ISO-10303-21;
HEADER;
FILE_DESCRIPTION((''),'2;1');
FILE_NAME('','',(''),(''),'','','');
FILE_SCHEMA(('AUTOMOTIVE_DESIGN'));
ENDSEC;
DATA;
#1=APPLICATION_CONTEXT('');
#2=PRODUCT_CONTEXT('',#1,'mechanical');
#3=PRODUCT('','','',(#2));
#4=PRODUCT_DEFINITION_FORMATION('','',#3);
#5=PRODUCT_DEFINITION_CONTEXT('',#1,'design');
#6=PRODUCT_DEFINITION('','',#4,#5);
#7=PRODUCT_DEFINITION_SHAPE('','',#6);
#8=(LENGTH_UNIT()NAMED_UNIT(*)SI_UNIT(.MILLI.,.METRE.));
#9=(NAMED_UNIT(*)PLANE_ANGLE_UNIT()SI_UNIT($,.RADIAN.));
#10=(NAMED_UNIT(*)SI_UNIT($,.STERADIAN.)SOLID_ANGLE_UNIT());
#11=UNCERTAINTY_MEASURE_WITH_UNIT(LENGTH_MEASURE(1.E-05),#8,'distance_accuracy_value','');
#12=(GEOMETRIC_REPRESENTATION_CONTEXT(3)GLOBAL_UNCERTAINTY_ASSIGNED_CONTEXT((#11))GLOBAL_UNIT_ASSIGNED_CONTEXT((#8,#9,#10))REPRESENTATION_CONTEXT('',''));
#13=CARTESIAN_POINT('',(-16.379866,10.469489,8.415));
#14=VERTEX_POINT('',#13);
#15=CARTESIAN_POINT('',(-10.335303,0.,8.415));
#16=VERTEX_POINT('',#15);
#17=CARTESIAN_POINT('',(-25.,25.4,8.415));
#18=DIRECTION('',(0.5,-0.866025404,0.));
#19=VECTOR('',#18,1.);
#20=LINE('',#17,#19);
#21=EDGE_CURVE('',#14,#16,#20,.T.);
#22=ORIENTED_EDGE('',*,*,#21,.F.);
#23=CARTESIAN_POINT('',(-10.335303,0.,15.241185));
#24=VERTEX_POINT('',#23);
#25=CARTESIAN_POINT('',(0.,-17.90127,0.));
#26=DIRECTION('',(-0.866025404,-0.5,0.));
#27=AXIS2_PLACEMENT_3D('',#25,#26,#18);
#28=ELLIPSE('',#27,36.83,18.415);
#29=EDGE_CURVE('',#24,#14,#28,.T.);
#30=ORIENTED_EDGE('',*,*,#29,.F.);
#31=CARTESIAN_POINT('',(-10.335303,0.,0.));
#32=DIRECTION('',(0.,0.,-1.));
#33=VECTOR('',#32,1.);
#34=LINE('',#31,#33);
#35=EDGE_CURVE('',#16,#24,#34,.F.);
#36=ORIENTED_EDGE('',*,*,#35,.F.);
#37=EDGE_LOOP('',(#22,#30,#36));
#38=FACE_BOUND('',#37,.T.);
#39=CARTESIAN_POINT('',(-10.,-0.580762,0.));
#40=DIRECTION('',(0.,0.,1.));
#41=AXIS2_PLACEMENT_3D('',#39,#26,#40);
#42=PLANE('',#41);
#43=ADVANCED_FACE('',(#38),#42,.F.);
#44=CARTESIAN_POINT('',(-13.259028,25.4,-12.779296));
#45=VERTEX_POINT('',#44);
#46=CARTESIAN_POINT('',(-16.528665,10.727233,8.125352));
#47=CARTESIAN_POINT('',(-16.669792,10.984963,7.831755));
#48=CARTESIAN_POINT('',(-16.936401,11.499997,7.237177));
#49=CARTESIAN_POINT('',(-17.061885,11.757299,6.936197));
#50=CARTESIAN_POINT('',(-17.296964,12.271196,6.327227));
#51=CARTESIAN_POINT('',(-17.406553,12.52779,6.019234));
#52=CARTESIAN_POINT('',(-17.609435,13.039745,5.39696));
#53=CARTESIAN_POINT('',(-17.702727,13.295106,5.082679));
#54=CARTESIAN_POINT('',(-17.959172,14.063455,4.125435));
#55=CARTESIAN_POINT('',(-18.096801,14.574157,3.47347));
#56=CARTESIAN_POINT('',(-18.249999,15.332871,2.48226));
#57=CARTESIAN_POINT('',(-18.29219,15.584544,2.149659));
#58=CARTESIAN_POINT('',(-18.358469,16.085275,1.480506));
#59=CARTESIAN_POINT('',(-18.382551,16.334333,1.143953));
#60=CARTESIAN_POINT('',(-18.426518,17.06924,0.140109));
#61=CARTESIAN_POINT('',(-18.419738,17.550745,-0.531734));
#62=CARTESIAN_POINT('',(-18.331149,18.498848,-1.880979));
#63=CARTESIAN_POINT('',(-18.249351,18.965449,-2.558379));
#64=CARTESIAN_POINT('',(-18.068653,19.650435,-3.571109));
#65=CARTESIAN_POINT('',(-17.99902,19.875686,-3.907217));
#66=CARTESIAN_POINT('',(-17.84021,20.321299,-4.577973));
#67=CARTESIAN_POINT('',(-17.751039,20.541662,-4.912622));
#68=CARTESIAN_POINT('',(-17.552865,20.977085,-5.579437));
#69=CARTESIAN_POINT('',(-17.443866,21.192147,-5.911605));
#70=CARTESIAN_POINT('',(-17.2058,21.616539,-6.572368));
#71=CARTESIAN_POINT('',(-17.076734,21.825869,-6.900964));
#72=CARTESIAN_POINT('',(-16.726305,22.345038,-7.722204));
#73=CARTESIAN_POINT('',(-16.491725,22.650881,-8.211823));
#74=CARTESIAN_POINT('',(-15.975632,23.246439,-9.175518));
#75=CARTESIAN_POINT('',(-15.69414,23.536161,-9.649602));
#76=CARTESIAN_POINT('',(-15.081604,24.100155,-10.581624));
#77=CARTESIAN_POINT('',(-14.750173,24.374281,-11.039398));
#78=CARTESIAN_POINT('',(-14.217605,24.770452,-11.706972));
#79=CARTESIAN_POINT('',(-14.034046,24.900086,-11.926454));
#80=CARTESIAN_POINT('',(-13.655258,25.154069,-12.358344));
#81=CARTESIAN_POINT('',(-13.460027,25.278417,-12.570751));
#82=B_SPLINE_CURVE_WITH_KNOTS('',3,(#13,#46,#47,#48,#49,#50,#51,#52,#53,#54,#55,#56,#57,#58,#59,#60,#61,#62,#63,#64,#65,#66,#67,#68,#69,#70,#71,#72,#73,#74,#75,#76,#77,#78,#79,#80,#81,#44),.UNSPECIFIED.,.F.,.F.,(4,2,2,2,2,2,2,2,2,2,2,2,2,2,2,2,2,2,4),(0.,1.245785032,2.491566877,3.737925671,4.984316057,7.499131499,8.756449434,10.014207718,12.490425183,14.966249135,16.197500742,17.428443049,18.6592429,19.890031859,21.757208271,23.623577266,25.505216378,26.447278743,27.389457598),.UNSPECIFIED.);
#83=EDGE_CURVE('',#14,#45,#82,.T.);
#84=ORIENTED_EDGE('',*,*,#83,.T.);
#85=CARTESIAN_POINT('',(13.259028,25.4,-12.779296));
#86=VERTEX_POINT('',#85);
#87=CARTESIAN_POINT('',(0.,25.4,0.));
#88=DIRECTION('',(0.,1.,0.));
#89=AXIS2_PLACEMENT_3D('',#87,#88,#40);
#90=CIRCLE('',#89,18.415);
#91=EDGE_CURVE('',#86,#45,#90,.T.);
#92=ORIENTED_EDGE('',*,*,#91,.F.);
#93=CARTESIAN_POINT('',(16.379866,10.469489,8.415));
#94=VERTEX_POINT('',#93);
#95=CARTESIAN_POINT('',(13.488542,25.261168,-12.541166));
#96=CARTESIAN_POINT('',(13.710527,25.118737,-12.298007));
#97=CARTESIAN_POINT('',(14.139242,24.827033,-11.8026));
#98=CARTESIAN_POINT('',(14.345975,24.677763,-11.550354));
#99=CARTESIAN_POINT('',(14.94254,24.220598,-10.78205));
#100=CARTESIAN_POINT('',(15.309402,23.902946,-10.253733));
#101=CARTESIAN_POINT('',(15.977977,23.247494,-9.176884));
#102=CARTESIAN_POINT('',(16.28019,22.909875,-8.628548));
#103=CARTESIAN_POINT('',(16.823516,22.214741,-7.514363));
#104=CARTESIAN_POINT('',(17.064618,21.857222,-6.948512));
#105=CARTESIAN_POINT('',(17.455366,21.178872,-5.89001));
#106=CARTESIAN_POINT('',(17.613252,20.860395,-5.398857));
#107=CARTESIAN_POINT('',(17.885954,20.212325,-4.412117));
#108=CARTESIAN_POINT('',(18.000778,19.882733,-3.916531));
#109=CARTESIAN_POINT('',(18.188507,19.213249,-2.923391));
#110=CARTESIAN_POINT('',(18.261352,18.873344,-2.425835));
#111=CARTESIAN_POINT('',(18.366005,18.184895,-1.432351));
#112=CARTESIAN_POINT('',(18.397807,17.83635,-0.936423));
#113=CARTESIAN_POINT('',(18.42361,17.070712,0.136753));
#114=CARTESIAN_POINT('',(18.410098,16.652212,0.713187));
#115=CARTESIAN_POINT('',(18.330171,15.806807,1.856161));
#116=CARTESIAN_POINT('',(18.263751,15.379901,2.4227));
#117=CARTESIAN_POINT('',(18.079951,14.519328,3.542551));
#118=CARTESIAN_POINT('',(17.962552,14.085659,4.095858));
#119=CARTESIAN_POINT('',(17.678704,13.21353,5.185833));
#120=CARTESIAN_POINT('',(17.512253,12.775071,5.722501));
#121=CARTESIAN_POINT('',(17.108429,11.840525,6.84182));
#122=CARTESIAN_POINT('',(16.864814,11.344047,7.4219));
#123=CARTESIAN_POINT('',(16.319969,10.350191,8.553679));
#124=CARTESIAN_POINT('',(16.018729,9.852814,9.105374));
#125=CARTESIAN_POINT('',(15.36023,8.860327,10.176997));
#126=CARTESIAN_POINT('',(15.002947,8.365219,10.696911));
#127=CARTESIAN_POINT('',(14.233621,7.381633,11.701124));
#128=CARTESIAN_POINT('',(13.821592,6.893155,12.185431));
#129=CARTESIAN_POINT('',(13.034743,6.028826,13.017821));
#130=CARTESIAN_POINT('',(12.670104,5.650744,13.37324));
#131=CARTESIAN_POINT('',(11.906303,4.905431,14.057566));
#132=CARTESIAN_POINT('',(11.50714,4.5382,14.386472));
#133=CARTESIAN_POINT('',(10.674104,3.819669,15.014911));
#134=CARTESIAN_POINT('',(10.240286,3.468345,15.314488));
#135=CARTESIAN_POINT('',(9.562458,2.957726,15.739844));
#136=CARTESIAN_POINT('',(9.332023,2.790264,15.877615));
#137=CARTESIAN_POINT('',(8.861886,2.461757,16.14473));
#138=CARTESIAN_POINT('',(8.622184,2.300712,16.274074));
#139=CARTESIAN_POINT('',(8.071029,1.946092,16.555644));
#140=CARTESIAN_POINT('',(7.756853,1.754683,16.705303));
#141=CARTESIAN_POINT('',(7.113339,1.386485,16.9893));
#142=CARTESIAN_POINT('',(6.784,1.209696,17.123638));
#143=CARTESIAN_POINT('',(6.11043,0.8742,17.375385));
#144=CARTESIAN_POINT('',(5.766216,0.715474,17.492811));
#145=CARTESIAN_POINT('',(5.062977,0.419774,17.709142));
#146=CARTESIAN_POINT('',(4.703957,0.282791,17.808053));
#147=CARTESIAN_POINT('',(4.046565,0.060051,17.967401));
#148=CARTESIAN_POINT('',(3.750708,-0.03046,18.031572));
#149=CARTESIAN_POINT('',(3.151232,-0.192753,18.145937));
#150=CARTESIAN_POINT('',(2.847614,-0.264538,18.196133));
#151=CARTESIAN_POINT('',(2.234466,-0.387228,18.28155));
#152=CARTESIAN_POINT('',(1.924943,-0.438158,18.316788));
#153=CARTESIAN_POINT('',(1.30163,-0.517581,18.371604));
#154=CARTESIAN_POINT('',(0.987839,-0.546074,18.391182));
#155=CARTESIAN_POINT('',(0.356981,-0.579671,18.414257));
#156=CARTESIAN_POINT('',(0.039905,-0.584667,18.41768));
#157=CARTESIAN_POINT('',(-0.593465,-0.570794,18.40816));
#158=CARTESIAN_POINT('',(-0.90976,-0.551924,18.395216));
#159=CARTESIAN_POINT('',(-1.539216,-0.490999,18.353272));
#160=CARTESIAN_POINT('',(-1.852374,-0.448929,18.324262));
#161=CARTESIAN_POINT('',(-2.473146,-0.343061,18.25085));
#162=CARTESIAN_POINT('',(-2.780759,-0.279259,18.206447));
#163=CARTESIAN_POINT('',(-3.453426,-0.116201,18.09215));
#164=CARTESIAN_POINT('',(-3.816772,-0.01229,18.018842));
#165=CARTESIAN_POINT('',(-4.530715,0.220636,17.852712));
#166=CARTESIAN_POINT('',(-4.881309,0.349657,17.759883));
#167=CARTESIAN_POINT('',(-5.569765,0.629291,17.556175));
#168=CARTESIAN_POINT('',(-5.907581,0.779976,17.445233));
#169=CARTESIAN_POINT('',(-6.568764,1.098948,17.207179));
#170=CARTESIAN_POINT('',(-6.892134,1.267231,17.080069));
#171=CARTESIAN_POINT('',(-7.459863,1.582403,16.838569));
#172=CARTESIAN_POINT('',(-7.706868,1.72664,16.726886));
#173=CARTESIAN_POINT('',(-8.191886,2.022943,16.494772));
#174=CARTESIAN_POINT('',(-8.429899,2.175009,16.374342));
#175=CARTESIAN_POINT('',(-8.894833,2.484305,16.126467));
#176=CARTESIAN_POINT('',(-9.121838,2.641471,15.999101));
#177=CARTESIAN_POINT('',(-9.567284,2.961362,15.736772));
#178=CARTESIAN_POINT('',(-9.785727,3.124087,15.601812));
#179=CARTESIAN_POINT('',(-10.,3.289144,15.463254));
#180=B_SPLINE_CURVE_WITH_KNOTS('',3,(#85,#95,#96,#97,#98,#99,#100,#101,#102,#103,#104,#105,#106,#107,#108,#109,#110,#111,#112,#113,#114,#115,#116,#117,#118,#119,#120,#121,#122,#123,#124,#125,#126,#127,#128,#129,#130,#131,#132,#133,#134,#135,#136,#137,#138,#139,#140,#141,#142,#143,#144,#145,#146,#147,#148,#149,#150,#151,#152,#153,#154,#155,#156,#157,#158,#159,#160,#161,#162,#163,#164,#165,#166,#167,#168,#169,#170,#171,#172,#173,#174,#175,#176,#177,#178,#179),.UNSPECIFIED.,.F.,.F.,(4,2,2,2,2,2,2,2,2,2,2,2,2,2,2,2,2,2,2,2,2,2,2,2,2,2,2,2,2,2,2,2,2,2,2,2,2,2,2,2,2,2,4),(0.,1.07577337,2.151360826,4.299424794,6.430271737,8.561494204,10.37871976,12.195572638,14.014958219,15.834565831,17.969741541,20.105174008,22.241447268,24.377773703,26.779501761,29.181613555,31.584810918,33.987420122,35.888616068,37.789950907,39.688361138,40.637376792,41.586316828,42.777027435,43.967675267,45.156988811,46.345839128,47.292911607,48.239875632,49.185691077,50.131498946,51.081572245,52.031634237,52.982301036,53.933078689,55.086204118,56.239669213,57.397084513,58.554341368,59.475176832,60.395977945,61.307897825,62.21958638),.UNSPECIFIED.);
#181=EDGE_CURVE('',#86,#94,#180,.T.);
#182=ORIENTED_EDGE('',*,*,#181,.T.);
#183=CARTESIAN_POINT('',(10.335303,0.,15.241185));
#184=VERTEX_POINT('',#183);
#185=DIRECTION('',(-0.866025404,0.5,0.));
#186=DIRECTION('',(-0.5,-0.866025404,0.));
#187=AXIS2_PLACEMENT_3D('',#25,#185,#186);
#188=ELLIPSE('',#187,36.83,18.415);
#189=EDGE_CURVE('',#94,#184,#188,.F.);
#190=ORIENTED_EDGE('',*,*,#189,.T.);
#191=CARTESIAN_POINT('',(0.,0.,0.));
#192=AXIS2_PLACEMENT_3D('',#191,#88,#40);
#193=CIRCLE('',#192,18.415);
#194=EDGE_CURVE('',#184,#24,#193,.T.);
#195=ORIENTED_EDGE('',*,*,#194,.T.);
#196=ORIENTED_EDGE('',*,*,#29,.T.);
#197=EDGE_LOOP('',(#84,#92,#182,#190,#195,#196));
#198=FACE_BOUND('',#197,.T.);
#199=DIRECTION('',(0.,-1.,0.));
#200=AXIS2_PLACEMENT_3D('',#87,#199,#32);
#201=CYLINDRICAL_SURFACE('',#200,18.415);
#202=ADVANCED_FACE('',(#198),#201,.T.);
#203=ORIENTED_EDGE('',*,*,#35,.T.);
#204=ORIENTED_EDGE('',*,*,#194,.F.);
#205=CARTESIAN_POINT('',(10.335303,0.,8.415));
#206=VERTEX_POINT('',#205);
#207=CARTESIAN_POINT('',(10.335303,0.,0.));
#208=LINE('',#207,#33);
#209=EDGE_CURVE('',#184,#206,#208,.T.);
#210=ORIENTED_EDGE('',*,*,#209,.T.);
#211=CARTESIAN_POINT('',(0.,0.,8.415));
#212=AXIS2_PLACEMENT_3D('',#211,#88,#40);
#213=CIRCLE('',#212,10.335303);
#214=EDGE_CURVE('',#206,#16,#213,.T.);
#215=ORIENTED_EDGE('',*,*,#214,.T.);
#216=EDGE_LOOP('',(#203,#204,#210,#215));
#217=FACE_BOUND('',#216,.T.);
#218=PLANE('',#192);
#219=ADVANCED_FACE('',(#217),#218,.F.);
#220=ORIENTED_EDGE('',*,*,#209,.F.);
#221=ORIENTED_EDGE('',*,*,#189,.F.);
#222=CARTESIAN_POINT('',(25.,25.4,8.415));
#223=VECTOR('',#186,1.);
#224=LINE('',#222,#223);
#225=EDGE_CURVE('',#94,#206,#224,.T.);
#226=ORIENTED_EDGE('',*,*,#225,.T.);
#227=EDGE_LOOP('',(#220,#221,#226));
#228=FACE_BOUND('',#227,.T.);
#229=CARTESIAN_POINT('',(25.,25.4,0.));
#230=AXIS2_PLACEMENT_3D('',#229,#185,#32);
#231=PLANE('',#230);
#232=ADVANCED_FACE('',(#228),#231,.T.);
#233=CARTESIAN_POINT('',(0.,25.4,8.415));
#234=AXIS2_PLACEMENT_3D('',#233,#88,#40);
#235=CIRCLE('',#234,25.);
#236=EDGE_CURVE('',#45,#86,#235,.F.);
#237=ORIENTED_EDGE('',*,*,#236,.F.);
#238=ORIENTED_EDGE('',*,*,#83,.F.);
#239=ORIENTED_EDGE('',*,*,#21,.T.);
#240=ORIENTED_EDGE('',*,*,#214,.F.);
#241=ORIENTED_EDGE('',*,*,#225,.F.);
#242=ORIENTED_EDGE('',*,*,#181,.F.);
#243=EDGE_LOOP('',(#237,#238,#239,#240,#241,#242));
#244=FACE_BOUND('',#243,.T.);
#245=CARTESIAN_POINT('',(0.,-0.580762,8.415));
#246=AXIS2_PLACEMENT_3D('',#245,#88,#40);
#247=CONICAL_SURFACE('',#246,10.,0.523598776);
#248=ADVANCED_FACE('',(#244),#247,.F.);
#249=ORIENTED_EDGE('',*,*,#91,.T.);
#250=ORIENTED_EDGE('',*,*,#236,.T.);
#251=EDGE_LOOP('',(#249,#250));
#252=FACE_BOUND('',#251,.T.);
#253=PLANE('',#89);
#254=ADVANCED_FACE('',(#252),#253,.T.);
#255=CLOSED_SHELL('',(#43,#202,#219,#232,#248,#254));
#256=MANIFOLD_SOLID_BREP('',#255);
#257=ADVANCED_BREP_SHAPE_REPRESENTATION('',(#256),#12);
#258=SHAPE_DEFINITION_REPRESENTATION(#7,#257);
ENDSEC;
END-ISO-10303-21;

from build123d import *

# Parameters (mm, degrees)
BOSS_EXTRUDE1_DEPTH = 25.4
CHAMFER1_SIZE       = 15
CHAMFER1_SIZE_2     = 25.980762114


with BuildPart() as part:
    # Sketch1 → Boss-Extrude1 (new body)
    with BuildSketch(Plane(origin=(0, 0, 0), x_dir=(1, 0, 0), z_dir=(0, 1, 0))):
        with BuildLine():
            ThreePointArc((-10, -8.415), (0, 1.585), (10, -8.415))
            Line((10, -8.415), (10, -15.463254024))
            ThreePointArc((10, -15.463254024), (16.17501507, -8.802335628), (18.415, 0))
            ThreePointArc((18.415, 0), (-8.802335628, 16.17501507), (-10, -15.463254024))
            Line((-10, -15.463254024), (-10, -8.415))
        make_face()
    extrude(amount=BOSS_EXTRUDE1_DEPTH)

    # Chamfer1
    # the kernel refuses this chamfer: 25.980762114, 15 mm, written as the material it takes off along each edge
    with BuildSketch(Plane(origin=(0, 25.4, 8.415), x_dir=(-1, 0, 0), z_dir=(0, 0, 1))) as chamfer1_piece_1:
        Polygon((10 + CHAMFER1_SIZE, 0), (10, CHAMFER1_SIZE_2), (10, 0), align=None)
    revolve(axis=Axis((0, 25.4, 8.415), (0, -1, 0)), revolution_arc=180, mode=Mode.SUBTRACT)
    with BuildSketch(Plane(origin=(-10, 25.4, 82.677713582), x_dir=(0.019326765612700622, -0.9998132206222078, 0), z_dir=(0, 0, -1))) as chamfer1_piece_2:
        Polygon((CHAMFER1_SIZE_2 * 0.999813220604, CHAMFER1_SIZE_2 * 0.0193267656124), (-CHAMFER1_SIZE * 0.0193267656127, CHAMFER1_SIZE * 0.999813220622), (0, 0), align=None)
    extrude(amount=74.262713582, mode=Mode.SUBTRACT)
    with BuildSketch(Plane(origin=(10, 25.4, 8.415), x_dir=(0.9983227437537926, 0.05789386240267136, 0), z_dir=(0, 0, 1))) as chamfer1_piece_3:
        Polygon((CHAMFER1_SIZE * 0.998322743754, -CHAMFER1_SIZE * 0.0578938624027), (-CHAMFER1_SIZE_2 * 0.0578938624016, -CHAMFER1_SIZE_2 * 0.998322743736), (0, 0), align=None)
    extrude(amount=74.262713582, mode=Mode.SUBTRACT)


solid = part.part
